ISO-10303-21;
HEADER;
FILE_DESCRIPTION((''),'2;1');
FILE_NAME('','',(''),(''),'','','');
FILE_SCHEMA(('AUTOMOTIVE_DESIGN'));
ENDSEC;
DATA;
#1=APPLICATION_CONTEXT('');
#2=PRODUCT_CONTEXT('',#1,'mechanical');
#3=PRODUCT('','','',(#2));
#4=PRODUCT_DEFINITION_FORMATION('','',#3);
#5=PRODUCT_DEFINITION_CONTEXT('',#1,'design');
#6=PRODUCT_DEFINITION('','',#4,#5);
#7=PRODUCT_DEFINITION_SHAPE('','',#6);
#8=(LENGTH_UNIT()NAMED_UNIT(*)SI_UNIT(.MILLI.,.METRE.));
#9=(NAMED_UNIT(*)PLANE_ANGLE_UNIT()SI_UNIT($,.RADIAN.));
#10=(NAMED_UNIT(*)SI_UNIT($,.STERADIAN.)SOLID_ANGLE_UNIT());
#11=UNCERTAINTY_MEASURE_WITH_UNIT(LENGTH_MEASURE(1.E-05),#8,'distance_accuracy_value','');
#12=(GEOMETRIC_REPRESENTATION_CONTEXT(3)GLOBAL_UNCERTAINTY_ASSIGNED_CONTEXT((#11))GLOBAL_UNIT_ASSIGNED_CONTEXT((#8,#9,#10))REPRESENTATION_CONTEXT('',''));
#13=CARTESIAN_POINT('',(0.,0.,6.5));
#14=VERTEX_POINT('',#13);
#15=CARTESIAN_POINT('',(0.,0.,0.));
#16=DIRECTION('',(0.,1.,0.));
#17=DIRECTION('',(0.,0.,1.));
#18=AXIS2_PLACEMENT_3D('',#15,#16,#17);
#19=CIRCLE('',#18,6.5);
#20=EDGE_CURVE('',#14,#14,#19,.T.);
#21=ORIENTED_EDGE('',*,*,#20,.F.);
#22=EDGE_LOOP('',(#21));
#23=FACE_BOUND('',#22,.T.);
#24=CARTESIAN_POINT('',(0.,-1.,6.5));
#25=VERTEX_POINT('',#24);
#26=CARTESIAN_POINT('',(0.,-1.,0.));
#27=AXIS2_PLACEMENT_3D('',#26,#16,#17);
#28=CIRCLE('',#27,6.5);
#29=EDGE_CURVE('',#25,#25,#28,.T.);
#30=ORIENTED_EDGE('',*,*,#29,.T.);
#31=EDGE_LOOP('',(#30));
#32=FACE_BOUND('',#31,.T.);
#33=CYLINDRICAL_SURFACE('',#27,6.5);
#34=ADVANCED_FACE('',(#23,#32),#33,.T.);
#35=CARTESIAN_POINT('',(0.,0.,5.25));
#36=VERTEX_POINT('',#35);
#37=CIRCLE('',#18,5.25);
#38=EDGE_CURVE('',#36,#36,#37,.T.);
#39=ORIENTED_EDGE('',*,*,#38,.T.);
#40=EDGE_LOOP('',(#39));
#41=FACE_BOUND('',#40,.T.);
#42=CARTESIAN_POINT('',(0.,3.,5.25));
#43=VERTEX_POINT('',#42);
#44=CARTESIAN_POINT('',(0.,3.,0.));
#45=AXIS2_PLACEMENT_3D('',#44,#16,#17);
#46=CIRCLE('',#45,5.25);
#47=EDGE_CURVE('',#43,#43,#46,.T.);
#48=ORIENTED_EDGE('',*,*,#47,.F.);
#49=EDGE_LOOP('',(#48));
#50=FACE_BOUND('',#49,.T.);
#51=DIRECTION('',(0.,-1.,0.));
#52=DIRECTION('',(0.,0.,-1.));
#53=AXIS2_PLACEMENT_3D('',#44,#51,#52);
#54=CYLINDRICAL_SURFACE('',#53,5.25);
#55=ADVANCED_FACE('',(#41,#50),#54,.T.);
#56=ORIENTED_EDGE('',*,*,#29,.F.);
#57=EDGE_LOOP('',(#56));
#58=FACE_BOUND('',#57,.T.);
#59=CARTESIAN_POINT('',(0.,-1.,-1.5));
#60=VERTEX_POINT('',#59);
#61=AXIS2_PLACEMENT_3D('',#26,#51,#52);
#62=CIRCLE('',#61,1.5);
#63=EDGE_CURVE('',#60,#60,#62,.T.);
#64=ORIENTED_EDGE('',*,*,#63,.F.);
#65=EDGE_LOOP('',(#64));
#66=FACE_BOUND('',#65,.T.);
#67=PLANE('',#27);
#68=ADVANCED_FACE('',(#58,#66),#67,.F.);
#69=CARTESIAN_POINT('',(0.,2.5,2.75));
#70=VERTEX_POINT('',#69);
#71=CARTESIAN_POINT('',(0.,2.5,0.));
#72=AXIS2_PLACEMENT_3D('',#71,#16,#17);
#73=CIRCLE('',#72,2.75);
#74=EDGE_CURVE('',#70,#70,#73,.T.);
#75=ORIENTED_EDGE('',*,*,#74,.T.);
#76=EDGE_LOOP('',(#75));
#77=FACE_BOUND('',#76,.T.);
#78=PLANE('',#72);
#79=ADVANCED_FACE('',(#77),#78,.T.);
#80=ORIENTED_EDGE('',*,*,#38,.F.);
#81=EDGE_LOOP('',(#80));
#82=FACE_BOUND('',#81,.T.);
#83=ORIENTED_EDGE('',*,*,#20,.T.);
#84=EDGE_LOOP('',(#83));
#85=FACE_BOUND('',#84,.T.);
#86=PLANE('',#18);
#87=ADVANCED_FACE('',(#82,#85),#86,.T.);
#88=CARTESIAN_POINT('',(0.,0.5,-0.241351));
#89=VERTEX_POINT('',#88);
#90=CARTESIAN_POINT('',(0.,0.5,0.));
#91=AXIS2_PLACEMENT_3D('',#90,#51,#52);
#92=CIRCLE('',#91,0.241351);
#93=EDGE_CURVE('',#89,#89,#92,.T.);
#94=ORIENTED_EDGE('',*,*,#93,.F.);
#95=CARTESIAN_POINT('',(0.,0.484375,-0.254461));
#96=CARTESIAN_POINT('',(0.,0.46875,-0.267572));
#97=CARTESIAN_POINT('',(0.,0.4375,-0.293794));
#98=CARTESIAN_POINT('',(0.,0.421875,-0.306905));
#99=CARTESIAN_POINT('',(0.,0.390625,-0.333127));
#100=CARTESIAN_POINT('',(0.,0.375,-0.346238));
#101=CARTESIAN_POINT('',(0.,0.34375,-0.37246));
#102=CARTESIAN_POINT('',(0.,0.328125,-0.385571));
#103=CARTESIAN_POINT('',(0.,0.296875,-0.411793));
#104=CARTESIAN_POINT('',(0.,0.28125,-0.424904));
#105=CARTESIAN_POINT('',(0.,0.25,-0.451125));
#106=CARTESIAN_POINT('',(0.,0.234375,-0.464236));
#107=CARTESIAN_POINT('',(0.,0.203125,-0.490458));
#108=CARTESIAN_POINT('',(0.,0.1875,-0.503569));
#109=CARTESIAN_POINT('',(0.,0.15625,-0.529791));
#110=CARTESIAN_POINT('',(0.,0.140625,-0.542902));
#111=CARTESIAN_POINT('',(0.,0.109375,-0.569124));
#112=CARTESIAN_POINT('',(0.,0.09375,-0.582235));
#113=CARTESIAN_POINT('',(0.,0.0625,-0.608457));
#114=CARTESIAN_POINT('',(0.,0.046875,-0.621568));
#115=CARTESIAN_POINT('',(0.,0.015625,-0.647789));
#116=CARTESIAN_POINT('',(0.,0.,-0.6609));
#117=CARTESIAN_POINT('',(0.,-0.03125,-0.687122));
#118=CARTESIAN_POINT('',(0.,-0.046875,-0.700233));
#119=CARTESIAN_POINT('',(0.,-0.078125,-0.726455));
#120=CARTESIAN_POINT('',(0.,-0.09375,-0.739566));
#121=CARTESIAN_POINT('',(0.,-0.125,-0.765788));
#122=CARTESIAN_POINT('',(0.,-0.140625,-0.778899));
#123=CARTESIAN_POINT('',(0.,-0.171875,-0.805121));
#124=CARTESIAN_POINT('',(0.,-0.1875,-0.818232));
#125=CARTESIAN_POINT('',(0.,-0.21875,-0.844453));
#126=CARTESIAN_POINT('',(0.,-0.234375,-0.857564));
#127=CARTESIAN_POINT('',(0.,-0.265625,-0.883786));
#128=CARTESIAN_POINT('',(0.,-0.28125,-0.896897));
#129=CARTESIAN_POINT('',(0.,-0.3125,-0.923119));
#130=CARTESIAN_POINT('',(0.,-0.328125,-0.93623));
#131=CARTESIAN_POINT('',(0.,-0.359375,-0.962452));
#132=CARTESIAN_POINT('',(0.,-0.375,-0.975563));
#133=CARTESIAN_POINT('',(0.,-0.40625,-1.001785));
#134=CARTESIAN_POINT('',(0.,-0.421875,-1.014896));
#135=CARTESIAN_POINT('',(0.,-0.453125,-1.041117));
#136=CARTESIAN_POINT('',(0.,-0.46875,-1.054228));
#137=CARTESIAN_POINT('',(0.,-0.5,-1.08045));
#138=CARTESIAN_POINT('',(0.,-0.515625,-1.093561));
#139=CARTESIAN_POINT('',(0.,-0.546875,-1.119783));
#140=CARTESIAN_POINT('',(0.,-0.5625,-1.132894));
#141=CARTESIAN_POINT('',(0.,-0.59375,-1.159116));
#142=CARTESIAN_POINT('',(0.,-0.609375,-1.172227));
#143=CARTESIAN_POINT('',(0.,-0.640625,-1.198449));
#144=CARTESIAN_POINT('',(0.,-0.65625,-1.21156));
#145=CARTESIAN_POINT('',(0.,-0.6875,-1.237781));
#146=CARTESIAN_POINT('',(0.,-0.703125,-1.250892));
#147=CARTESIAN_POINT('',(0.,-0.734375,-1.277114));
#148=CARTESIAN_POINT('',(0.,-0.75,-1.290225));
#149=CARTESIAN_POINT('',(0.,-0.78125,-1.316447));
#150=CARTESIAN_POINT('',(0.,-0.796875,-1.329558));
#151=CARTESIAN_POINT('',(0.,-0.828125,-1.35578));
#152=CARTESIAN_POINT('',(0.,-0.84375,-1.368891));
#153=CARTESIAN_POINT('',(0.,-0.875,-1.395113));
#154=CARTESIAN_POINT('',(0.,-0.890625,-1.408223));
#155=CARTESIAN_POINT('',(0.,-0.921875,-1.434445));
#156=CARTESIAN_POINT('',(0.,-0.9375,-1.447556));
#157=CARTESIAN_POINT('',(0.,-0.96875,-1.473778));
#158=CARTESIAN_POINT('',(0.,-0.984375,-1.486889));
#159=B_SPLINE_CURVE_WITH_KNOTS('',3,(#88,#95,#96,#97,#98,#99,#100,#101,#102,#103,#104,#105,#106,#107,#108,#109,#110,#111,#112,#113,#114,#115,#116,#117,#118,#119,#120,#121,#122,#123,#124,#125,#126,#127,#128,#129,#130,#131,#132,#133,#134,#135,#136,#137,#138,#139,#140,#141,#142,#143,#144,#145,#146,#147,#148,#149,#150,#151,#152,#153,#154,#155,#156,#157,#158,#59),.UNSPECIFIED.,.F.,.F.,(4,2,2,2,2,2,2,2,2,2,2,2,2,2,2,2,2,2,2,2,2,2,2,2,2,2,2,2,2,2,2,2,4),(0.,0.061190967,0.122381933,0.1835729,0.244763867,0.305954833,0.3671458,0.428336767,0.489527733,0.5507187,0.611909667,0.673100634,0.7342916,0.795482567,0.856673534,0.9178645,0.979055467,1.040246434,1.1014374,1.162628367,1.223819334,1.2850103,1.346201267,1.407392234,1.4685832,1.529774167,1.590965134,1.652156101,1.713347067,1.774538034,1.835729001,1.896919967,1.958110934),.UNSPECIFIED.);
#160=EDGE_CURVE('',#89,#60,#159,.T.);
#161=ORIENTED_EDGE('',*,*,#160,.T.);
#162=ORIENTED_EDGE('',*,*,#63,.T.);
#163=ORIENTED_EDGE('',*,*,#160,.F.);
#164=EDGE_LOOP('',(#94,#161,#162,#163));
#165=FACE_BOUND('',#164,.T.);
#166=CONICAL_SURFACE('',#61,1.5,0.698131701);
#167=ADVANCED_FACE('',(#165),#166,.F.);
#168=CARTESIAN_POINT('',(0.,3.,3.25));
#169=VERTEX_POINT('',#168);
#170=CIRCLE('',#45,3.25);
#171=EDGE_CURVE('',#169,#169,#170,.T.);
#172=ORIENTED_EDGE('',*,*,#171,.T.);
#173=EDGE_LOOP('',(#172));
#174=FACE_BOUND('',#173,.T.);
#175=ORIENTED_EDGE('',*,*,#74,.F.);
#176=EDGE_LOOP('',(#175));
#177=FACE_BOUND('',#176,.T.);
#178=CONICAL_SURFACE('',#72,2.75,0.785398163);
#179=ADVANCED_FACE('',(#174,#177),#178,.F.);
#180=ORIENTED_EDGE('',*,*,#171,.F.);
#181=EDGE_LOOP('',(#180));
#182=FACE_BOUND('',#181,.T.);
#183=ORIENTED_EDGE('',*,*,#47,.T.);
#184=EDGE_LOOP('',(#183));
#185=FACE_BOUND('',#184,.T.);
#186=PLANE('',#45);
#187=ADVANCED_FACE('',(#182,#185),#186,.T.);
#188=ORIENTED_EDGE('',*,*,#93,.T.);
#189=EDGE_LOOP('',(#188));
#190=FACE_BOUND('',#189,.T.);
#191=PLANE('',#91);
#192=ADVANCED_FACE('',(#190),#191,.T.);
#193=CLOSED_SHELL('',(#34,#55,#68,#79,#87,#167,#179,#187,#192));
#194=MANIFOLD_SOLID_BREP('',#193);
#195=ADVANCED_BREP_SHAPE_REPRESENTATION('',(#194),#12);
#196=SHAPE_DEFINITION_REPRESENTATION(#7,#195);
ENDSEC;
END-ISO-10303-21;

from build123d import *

# Parameters (mm, degrees)
BASES_R             = 6.5
BASE_DEPTH          = 1
O_RINGCAPTURES_R    = 5.25
O_RINGCAPTURE_DEPTH = 3
TOPBORES_R          = 3.25
TOPBORE_DEPTH       = 0.5
CHAMFER1_SIZE       = 0.5
CYLINDERBORES_R     = 1.5
CUT_EXTRUDE1_DEPTH  = 1.5
CUT_EXTRUDE1_DRAFT  = -40


with BuildPart() as part:
    # BaseS → Base (new body)
    with BuildSketch(Plane(origin=(0, 0, 0), x_dir=(1, 0, 0), z_dir=(0, 1, 0))):
        with Locations(Location((0, 0, 0), (0, 0, 270))):
            Circle(BASES_R)
    extrude(amount=-BASE_DEPTH)

    # O-RingCaptureS → O-RingCapture (add)
    with BuildSketch(Plane(origin=(0, 0, 0), x_dir=(1, 0, 0), z_dir=(0, 1, 0))):
        with Locations(Location((0, 0, 0), (0, 0, 270))):
            Circle(O_RINGCAPTURES_R)
    extrude(amount=O_RINGCAPTURE_DEPTH)

    # TopBoreS → TopBore (cut)
    with BuildSketch(Plane(origin=(0, 3, 0), x_dir=(1, 0, 0), z_dir=(0, 1, 0))):
        with Locations(Location((0, 0, 0), (0, 0, 270))):
            Circle(TOPBORES_R)
    extrude(amount=-TOPBORE_DEPTH, mode=Mode.SUBTRACT)

    # Chamfer1
    chamfer1_edges = [part.edges().sort_by_distance(p)[0] for p in [
        (0, 2.5, -3.25),
    ]]
    chamfer(chamfer1_edges, length=CHAMFER1_SIZE - 0.0001)  # a hair under: the kernel refuses the full size


with BuildPart() as cut_extrude1_tool:
    # CylinderBoreS → Cut-Extrude1 (with draft: the straight prism first)
    with BuildSketch(Plane(origin=(0, -1, 0), x_dir=(-1, 0, 0), z_dir=(0, -1, 0))):
        Circle(CYLINDERBORES_R)
    extrude(amount=-CUT_EXTRUDE1_DEPTH)
    # Cut-Extrude1: the draft: its side faces are tilted about the plane it starts from
    cut_extrude1_sides = [cut_extrude1_tool.faces().sort_by_distance(p)[0] for p in [
        (1.5, -0.25, 0),
    ]]
    draft(cut_extrude1_sides, Plane(origin=(0, -1, 0), x_dir=(-1, 0, 0), z_dir=(0, -1, 0)), CUT_EXTRUDE1_DRAFT)


with BuildPart() as part_1:
    add(part.part)

    # Cut-Extrude1: cut by cut_extrude1_tool
    add(cut_extrude1_tool.part, mode=Mode.SUBTRACT)


solid = part_1.part
